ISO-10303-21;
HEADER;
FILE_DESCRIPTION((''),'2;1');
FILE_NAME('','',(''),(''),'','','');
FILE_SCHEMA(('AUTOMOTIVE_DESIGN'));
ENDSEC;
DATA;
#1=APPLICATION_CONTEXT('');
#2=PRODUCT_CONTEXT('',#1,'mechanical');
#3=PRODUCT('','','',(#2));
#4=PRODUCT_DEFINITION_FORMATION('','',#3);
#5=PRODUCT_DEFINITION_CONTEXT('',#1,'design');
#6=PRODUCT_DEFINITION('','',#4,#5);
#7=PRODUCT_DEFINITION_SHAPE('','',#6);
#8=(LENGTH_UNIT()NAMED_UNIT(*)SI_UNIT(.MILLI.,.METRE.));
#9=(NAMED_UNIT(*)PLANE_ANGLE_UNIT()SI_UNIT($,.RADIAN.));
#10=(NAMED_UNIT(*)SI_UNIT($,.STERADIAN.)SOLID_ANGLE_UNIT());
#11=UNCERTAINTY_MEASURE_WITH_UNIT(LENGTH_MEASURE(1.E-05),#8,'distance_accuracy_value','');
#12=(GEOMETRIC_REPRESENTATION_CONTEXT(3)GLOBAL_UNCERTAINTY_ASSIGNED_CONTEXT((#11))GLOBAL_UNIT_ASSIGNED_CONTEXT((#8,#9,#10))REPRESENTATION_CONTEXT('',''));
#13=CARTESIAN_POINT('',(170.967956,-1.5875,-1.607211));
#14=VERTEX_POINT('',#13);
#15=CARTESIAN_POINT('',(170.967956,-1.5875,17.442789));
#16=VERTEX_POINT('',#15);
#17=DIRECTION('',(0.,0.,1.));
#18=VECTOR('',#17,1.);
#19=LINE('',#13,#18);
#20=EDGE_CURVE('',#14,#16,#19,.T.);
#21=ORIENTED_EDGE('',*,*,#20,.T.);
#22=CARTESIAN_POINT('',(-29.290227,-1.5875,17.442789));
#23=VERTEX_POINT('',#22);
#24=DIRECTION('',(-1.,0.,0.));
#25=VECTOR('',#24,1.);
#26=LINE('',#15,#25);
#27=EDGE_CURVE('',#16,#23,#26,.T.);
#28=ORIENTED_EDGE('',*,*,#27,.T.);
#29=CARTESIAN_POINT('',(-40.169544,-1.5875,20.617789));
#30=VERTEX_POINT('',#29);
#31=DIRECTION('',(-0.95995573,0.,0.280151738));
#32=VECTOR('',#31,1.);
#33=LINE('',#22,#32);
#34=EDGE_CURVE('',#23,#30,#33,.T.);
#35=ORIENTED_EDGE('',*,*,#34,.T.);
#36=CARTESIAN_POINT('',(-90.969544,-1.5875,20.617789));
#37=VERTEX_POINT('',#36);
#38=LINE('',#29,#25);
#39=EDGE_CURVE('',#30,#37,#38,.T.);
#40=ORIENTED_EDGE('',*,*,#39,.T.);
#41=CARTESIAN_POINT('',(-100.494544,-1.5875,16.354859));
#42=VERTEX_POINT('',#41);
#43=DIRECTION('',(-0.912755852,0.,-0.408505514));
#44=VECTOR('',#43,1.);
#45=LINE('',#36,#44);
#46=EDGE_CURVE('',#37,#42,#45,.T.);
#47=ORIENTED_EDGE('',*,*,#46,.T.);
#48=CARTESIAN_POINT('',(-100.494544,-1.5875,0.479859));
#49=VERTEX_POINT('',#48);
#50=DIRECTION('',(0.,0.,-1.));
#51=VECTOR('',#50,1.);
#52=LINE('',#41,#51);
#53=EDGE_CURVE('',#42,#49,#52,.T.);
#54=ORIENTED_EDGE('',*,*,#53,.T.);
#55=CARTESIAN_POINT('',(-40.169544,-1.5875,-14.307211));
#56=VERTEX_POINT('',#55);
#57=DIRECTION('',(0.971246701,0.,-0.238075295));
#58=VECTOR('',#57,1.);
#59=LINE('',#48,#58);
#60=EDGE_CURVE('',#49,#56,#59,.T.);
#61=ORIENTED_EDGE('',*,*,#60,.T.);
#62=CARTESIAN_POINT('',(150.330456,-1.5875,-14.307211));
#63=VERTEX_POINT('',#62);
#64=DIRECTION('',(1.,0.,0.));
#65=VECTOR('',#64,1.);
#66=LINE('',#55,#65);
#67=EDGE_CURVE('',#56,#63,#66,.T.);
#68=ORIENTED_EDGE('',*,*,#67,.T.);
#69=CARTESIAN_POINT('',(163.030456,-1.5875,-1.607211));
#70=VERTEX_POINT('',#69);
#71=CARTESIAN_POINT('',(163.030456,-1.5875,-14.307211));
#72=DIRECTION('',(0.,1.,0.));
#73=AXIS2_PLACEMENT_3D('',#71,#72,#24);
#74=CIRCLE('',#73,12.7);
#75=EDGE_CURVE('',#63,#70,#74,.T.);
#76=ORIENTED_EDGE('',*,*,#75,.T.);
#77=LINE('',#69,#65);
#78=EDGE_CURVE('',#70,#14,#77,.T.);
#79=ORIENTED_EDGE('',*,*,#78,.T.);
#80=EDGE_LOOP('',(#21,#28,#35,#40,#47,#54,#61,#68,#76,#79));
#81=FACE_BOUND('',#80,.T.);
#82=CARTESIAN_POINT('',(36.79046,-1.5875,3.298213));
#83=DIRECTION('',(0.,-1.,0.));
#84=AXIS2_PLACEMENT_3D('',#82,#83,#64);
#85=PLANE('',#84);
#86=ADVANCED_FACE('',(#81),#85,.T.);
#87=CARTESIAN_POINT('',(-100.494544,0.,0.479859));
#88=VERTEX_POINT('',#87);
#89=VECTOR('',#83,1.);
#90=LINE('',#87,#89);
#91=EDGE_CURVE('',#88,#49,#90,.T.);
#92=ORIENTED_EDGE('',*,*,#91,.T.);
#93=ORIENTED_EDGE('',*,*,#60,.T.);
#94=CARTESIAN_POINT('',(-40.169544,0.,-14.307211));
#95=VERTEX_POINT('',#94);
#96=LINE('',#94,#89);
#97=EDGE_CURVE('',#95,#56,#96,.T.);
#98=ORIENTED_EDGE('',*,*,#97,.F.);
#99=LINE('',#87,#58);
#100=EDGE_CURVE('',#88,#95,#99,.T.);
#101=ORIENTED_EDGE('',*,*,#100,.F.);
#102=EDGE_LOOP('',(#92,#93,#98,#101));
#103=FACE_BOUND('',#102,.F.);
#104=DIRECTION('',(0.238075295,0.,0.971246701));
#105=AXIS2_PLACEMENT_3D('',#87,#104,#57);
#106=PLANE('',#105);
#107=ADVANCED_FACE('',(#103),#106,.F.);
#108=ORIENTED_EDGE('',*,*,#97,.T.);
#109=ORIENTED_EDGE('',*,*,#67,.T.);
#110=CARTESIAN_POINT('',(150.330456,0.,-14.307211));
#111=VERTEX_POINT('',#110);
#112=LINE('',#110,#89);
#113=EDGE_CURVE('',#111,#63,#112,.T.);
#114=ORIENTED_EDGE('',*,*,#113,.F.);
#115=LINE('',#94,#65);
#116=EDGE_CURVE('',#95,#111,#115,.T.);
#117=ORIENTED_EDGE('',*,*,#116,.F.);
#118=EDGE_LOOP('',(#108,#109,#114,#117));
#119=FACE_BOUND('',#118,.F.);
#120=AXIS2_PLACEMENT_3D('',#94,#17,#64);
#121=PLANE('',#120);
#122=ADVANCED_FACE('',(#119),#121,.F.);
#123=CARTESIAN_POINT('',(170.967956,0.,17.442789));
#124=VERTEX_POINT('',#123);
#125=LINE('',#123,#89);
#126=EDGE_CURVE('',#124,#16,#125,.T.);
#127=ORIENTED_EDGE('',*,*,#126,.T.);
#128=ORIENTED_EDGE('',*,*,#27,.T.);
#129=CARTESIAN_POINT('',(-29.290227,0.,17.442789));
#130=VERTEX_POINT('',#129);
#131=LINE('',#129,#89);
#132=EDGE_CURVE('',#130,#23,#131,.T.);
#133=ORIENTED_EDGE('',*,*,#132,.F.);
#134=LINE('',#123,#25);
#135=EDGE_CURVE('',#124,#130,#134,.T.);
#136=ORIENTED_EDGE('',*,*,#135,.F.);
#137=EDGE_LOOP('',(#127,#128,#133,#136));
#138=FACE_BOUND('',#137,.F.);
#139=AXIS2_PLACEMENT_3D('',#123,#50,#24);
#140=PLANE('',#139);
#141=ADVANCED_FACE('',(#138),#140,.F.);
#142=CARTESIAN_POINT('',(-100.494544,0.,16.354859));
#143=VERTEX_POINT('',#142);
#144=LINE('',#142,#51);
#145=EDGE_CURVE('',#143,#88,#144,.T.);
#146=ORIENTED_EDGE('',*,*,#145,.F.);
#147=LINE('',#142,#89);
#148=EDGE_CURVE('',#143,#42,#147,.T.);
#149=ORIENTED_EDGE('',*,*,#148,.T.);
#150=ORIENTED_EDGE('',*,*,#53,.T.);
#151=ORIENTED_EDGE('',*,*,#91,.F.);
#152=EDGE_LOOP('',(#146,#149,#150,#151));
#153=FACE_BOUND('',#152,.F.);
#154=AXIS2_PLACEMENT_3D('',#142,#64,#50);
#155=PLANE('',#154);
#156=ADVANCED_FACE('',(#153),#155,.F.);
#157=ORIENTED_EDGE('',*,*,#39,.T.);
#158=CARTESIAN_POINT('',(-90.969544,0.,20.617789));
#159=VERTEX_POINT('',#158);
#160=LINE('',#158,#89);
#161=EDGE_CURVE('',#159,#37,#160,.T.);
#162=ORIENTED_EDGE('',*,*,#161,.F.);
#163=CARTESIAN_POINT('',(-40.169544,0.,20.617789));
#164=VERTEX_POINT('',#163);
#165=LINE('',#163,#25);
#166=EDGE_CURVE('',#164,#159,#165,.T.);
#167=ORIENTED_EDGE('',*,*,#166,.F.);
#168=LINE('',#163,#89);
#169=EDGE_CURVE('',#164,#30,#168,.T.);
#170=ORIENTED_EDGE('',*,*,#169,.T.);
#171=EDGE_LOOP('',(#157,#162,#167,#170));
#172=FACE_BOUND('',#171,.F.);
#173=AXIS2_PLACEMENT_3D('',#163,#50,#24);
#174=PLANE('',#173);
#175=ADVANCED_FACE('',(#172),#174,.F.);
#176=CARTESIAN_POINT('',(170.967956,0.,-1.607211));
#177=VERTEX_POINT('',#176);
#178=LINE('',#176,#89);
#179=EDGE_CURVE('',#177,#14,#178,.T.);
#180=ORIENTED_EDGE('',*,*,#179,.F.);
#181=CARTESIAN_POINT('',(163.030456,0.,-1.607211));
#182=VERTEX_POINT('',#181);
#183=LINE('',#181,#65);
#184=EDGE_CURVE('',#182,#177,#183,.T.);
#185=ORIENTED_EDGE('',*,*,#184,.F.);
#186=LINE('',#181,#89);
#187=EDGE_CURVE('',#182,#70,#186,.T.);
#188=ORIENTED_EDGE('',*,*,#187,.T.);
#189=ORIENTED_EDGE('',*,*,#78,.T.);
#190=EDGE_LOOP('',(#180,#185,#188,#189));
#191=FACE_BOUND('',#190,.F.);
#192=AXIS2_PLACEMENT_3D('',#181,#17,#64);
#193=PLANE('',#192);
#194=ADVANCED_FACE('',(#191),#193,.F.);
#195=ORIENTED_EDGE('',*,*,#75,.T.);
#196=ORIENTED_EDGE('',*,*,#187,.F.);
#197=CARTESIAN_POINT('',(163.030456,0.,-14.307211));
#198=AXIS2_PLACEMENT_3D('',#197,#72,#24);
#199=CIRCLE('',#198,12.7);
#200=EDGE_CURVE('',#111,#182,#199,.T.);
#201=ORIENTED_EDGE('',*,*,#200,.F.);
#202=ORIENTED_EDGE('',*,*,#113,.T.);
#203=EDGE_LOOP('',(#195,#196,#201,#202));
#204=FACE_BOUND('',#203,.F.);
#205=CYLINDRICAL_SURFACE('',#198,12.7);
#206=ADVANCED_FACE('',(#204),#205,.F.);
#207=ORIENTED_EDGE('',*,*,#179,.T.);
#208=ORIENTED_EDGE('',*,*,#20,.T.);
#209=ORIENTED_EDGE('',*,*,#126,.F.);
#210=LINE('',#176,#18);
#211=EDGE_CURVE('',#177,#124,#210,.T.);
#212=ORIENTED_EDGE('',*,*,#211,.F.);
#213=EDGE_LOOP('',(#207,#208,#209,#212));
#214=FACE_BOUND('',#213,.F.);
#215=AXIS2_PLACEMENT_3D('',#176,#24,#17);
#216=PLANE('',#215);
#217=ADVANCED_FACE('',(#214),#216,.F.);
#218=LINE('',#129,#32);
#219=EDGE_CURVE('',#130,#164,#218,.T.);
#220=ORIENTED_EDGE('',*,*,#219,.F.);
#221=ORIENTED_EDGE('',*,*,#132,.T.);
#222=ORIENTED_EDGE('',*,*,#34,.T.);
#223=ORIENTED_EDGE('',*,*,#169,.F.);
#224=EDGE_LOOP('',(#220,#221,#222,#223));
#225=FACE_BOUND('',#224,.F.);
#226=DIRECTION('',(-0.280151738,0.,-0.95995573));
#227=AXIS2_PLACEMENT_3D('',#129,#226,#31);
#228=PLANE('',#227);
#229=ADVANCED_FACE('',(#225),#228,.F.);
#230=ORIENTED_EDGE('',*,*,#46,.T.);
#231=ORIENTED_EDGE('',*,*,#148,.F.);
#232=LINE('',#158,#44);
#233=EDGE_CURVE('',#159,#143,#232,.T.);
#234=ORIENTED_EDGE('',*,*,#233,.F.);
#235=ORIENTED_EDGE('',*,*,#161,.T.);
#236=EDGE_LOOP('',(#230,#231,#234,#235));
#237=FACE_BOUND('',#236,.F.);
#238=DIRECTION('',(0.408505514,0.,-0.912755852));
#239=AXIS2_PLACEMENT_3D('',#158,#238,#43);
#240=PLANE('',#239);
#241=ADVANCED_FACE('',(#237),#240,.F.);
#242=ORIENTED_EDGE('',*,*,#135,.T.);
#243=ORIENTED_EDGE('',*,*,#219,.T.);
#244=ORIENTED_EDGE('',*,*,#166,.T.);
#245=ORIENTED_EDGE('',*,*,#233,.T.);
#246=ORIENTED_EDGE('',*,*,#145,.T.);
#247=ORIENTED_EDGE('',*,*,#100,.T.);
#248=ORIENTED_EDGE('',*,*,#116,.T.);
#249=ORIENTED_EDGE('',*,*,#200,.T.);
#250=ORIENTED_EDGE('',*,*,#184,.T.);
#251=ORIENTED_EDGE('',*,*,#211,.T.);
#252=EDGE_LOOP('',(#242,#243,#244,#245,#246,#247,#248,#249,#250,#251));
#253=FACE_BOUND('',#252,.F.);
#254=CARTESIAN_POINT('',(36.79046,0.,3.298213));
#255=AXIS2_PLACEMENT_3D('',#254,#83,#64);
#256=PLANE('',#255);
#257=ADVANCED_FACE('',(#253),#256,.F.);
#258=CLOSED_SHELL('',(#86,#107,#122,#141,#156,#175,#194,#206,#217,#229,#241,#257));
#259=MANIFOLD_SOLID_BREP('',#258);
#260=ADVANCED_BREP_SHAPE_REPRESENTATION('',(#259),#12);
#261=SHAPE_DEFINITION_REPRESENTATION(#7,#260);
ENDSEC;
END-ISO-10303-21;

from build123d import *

# Parameters (mm, degrees)
F1_DEPTH = 1.5875


# Not quite as in the source:
# - a length typed as a fraction of an inch, garbled in the dataset ("3 / 203.2 mm" for 3/8 in), is restored


with BuildPart() as f1:
    # F0 (on Front) → F1 (new body)
    with BuildSketch(Plane.XZ):
        with BuildLine():
            Line((-100.4945435773, 16.3548587115), (-100.4945435773, 0.4798587115))
            Line((-100.4945435773, 0.4798587115), (-40.1695435773, -14.3072105065))
            Line((-40.1695435773, -14.3072105065), (150.3304564227, -14.3072105065))
            ThreePointArc((150.3304564227, -14.3072105065), (154.0502003016, -5.3269543854), (163.0304564227, -1.6072105065))
            Line((163.0304564227, -1.6072105065), (170.9679564227, -1.6072105065))
            Line((170.9679564227, -1.6072105065), (170.9679564227, 17.4427894935))
            Line((170.9679564227, 17.4427894935), (-29.290227019, 17.4427894935))
            Line((-29.290227019, 17.4427894935), (-40.1695435773, 20.6177894935))
            Line((-40.1695435773, 20.6177894935), (-90.9695435773, 20.6177894935))
            Line((-90.9695435773, 20.6177894935), (-100.4945435773, 16.3548587115))
        make_face()
    extrude(amount=F1_DEPTH)


solid = f1.part
